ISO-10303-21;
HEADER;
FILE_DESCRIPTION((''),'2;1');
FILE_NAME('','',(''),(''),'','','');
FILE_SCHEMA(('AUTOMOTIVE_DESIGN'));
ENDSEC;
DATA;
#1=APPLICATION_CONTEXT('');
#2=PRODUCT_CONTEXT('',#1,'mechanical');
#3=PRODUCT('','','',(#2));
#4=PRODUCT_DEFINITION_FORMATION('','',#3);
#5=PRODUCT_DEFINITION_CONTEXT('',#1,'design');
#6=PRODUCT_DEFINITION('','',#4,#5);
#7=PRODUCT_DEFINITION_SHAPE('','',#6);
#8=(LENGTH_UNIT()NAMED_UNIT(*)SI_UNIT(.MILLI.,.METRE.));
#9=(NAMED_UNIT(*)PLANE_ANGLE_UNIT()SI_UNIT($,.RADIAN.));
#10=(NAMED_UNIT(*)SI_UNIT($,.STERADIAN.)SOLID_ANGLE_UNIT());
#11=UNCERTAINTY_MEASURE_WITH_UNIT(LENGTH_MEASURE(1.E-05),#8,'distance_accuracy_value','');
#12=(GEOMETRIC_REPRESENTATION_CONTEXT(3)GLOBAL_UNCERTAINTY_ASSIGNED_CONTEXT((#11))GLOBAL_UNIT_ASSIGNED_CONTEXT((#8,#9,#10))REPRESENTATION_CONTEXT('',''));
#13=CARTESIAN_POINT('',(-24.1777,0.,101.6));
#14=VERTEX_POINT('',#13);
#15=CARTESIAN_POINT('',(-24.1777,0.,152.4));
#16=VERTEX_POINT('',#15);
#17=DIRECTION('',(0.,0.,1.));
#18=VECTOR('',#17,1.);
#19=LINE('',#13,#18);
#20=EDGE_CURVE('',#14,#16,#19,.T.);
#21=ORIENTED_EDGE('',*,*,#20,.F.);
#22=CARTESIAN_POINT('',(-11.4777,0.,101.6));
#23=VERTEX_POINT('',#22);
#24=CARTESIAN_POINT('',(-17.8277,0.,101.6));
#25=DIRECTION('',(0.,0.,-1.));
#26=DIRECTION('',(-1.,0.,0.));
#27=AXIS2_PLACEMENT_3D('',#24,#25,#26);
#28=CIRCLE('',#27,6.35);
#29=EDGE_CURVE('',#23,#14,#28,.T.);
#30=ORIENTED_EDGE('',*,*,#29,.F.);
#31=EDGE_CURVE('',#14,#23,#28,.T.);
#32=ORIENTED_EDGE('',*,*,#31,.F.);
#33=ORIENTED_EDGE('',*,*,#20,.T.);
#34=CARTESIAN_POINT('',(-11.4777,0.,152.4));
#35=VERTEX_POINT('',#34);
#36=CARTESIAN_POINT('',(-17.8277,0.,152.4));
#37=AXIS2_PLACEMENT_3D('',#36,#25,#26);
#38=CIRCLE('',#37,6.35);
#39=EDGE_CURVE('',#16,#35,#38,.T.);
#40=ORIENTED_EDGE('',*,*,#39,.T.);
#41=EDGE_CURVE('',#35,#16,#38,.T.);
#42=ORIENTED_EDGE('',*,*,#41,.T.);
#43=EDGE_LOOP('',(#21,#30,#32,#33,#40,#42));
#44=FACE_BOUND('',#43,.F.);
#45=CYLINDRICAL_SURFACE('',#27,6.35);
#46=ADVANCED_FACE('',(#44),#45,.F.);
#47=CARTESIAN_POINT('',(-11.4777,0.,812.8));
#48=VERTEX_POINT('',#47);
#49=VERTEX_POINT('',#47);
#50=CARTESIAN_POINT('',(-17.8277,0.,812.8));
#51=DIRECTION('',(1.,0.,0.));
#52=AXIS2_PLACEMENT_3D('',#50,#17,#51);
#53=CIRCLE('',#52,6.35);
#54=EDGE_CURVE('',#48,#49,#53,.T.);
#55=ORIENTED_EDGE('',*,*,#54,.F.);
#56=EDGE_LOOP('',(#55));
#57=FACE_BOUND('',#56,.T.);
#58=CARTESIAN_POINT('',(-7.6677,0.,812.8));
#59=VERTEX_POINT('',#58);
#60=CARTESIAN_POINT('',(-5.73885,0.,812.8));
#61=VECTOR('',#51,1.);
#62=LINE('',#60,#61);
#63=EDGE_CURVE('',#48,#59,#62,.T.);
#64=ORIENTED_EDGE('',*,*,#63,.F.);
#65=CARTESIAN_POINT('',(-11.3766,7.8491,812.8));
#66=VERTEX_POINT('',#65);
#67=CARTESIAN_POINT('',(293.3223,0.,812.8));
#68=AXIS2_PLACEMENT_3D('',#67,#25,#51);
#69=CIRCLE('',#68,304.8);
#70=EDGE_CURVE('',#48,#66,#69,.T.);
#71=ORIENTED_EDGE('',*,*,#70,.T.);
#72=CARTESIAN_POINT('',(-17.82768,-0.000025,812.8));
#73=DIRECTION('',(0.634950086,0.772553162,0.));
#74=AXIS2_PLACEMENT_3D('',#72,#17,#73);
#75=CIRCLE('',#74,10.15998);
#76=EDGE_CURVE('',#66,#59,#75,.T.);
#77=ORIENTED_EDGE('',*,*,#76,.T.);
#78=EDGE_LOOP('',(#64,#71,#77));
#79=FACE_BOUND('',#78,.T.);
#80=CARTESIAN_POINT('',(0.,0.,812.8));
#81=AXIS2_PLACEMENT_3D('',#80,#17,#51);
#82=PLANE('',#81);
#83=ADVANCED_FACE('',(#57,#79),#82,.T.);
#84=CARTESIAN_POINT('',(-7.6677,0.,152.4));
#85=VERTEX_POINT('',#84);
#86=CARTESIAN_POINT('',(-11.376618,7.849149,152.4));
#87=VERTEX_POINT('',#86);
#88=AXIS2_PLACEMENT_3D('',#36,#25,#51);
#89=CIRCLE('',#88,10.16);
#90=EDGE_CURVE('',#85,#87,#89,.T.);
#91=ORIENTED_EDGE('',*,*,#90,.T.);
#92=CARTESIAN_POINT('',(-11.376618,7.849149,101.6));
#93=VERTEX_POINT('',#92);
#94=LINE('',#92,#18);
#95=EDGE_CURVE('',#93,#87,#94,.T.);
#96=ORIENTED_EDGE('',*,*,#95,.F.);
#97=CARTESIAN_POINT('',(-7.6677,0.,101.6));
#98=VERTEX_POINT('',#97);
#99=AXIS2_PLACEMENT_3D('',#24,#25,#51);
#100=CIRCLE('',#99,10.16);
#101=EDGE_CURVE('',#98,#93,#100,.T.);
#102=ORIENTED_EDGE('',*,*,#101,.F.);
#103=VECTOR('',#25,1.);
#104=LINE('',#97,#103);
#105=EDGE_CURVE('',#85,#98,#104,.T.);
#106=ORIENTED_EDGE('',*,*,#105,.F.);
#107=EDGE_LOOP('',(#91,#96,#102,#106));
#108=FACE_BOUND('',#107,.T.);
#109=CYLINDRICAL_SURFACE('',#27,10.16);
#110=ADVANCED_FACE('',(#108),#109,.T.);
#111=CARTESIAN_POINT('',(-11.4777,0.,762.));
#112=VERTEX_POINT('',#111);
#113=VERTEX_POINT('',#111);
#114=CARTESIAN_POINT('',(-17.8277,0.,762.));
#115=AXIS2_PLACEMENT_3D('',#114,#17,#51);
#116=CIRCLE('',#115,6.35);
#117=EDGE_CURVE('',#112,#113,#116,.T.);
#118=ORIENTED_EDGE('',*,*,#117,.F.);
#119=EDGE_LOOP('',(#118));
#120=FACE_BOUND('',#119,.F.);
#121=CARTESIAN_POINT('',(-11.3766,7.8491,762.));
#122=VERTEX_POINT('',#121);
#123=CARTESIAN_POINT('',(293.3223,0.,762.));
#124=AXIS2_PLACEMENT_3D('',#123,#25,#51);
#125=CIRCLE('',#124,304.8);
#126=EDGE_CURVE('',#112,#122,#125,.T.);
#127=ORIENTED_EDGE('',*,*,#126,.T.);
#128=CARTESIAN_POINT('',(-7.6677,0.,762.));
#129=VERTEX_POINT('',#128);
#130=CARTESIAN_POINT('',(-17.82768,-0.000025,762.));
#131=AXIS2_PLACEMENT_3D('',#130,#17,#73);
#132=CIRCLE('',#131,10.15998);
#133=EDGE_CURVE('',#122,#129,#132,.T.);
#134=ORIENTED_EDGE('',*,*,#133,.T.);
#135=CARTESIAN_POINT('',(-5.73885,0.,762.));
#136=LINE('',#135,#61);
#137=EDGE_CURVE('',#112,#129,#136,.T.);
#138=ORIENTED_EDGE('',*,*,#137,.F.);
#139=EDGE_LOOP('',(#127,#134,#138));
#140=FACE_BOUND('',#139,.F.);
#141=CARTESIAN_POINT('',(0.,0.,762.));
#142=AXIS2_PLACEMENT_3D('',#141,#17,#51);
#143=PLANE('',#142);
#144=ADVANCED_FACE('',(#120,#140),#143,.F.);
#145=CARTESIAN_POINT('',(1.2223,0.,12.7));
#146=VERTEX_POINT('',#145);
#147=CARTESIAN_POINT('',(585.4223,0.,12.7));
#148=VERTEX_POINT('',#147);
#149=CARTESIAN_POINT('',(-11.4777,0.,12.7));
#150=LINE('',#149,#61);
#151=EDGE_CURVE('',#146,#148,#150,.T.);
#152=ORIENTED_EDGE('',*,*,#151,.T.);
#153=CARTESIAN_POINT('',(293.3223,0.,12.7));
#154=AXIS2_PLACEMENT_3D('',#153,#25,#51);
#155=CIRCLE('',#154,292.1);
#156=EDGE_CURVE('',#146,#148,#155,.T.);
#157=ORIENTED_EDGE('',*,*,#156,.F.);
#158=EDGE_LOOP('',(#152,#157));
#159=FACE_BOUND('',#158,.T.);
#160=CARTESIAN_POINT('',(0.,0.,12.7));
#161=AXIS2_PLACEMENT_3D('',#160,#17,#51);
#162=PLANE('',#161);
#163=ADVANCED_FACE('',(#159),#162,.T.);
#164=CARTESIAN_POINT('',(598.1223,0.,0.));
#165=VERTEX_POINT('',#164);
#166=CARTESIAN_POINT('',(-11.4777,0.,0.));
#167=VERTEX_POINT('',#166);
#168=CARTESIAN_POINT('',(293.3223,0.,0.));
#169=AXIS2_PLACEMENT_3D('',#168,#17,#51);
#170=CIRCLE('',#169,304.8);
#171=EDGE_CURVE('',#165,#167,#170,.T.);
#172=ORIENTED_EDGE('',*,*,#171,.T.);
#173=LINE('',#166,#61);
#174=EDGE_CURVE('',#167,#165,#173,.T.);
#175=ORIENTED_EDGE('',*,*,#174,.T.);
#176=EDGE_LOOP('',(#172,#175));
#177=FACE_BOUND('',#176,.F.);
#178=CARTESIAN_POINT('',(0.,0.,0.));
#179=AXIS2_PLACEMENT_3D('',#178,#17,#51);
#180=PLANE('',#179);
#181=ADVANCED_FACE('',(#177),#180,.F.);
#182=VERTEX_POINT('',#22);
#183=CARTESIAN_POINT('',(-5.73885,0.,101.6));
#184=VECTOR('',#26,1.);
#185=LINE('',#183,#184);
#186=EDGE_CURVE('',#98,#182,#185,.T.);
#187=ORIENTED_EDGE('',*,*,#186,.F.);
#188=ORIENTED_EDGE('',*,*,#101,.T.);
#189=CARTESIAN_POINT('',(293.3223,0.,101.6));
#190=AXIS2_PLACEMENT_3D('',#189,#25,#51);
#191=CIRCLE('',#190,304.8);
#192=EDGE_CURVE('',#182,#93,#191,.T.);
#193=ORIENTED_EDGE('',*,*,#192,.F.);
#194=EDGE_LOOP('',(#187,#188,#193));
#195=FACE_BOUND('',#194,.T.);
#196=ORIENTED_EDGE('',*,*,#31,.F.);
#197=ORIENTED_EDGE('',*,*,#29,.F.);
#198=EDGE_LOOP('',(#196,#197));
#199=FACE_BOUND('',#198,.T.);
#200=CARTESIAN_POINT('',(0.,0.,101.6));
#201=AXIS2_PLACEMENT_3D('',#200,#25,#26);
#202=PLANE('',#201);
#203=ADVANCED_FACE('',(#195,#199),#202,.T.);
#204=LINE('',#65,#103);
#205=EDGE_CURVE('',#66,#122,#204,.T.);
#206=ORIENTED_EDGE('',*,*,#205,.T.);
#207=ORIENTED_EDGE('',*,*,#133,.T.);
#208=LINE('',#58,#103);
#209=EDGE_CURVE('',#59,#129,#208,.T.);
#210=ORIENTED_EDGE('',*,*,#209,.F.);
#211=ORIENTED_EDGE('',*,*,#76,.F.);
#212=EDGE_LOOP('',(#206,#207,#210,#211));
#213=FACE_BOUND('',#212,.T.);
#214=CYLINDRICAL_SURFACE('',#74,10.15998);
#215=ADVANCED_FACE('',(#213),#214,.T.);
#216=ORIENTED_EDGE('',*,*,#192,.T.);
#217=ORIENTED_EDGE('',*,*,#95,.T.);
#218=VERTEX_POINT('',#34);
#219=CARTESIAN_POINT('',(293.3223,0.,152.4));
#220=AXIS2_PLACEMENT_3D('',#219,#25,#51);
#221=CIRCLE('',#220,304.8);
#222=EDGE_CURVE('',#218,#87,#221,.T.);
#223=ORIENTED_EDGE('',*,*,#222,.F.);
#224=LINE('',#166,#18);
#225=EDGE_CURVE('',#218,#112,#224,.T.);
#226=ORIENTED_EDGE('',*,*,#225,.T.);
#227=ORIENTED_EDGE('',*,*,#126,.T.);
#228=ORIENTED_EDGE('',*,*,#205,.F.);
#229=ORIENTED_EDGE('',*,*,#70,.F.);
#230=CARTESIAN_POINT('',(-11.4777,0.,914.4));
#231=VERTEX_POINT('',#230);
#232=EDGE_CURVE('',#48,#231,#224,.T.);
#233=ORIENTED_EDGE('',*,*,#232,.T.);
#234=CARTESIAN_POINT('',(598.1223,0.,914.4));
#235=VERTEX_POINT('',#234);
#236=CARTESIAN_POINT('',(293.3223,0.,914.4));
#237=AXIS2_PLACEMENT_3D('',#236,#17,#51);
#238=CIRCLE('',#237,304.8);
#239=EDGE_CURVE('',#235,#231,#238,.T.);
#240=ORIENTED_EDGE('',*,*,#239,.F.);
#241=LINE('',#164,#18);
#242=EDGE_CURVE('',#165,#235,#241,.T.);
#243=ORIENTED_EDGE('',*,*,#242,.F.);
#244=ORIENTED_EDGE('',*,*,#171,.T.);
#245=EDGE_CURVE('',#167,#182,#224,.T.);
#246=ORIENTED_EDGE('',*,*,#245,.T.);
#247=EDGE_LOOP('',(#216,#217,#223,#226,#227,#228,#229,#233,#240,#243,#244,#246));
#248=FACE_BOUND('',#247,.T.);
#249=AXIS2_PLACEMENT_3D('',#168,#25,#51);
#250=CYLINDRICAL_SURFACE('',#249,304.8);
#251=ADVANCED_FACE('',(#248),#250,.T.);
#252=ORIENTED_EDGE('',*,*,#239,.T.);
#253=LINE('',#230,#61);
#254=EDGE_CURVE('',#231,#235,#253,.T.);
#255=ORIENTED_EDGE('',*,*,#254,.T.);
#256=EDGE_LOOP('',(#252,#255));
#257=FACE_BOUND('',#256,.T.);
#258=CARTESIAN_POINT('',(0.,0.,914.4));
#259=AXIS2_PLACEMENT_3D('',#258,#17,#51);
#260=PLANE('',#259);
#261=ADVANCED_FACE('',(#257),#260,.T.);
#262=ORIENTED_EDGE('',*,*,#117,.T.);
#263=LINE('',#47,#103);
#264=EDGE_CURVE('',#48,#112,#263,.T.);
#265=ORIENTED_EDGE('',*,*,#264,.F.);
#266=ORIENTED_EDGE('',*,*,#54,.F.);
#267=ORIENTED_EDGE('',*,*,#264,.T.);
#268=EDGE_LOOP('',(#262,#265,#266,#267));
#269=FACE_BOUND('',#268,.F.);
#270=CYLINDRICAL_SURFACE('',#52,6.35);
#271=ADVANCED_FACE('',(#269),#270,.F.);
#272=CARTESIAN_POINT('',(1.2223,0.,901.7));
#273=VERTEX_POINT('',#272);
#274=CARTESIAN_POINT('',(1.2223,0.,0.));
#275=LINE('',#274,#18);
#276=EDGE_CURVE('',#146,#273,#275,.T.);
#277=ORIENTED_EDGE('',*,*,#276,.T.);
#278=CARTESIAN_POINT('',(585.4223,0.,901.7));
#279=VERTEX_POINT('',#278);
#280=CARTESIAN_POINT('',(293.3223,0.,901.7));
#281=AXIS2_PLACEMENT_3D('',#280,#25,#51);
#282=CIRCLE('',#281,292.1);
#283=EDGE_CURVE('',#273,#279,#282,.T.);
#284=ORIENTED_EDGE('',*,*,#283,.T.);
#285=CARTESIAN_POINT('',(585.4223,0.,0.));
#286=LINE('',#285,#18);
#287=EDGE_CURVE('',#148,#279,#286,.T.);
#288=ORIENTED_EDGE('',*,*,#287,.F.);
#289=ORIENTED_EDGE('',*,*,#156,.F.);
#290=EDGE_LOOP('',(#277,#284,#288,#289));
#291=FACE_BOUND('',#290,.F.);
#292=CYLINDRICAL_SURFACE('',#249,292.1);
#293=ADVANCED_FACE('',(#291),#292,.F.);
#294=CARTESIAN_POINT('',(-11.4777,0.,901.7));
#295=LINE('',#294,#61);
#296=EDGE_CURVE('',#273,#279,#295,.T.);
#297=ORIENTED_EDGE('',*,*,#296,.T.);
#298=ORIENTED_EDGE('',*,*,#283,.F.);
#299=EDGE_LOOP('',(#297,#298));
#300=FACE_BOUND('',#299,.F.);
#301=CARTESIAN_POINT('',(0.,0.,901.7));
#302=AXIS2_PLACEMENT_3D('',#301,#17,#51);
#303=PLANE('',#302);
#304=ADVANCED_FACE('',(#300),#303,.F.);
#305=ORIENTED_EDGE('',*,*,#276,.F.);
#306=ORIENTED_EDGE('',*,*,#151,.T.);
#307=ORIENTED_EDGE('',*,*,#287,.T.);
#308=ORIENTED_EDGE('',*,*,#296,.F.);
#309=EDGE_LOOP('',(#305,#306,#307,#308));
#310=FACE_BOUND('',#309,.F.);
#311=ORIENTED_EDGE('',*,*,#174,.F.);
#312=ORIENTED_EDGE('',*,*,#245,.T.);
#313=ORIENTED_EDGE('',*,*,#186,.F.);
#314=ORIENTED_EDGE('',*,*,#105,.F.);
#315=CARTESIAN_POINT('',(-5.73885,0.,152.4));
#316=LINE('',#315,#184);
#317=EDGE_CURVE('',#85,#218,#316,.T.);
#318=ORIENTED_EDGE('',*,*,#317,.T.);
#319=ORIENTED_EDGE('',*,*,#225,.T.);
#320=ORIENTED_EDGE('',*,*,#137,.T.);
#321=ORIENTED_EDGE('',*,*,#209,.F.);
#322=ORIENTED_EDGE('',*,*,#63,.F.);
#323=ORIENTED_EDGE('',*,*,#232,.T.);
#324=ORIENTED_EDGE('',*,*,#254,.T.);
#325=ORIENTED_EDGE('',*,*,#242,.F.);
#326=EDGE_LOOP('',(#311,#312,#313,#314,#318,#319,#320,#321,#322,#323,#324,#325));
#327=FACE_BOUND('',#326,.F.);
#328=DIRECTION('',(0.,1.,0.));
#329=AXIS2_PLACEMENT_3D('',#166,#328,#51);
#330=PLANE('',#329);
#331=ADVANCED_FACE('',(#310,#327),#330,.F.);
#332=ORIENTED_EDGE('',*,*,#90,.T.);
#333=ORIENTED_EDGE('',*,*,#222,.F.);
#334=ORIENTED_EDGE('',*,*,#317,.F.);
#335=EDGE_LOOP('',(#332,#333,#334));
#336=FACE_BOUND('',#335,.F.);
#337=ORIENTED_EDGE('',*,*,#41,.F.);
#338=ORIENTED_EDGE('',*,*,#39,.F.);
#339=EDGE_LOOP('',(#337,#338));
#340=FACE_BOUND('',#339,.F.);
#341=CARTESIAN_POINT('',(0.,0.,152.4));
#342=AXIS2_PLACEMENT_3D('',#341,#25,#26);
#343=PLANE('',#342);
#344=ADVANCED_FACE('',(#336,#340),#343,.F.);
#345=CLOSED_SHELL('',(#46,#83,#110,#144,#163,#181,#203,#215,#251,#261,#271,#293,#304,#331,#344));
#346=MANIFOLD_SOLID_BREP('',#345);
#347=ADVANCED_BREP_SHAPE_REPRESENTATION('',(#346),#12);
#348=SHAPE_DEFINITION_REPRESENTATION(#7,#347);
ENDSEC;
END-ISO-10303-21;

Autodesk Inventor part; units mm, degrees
ref_plane "YZ Plane" through (0, 0, 0) normal (1, 0, 0) x (0, 1, 0)
ref_plane "XZ Plane" through (0, 0, 0) normal (0, 1, 0) x (-1, 0, 0)
ref_plane "XY Plane" through (0, 0, 0) normal (0, 0, 1) x (1, 0, 0)
sketch "Sketch1" plane through (0, 0, 0) normal (0, 0, 1) x (1, 0, 0)
  arc A0 (598.1223, 0) -> (-11.4777, 0) centre (293.3223, 0) ccw
  line L0 (-11.4777, 0) -> (598.1223, 0)
  point P0 (0, 0)
  dimension "d0" = 609.6
  dimension "d1" = 304.8
extrude "Extrusion1" add sketch "Sketch1" along normal blind 914.4
shell "Shell1" thickness 12.7 removed faces 1 at (191.7223, 0, 609.6)
ref_plane "Work Plane1" through (0, 0, 812.8) normal (0, 0, 1) x (1, 0, 0)
ref_plane "Work Plane2" through (0, 0, 101.6) normal (0, 0, -1) x (-1, 0, 0)
sketch "Sketch2" plane through (0, 0, 101.6) normal (0, 0, -1) x (-1, 0, 0)
  circle A0 centre (17.8277, 0) radius 10.16
  circle A1 centre (17.8277, 0) radius 6.35
  arc A2 (11.4777, 0) -> (-598.1223, 0) centre (-293.3223, 0) ccw projected
  point P0 (0, 0)
  dimension "d7" = 20.32
  dimension "d8" = 12.7
extrude "Extrusion2" add sketch "Sketch2" against normal blind 50.8
sketch "Sketch3" plane through (0, 0, 812.8) normal (0, 0, 1) x (1, 0, 0)
  arc A0 (-11.3766, 7.8491) -> (-7.6677, 0) centre (-17.8277, 0) ccw projected
  circle A1 centre (-17.8277, 0) radius 10.16
  circle A2 centre (-17.8277, 0) radius 6.35
  point P0 (0, 0)
  point P1 (-7.6677, 0)
  dimension "d11" = 12.7
extrude "Extrusion3" add sketch "Sketch3" against normal blind 50.8
properties part number "chestTop"
